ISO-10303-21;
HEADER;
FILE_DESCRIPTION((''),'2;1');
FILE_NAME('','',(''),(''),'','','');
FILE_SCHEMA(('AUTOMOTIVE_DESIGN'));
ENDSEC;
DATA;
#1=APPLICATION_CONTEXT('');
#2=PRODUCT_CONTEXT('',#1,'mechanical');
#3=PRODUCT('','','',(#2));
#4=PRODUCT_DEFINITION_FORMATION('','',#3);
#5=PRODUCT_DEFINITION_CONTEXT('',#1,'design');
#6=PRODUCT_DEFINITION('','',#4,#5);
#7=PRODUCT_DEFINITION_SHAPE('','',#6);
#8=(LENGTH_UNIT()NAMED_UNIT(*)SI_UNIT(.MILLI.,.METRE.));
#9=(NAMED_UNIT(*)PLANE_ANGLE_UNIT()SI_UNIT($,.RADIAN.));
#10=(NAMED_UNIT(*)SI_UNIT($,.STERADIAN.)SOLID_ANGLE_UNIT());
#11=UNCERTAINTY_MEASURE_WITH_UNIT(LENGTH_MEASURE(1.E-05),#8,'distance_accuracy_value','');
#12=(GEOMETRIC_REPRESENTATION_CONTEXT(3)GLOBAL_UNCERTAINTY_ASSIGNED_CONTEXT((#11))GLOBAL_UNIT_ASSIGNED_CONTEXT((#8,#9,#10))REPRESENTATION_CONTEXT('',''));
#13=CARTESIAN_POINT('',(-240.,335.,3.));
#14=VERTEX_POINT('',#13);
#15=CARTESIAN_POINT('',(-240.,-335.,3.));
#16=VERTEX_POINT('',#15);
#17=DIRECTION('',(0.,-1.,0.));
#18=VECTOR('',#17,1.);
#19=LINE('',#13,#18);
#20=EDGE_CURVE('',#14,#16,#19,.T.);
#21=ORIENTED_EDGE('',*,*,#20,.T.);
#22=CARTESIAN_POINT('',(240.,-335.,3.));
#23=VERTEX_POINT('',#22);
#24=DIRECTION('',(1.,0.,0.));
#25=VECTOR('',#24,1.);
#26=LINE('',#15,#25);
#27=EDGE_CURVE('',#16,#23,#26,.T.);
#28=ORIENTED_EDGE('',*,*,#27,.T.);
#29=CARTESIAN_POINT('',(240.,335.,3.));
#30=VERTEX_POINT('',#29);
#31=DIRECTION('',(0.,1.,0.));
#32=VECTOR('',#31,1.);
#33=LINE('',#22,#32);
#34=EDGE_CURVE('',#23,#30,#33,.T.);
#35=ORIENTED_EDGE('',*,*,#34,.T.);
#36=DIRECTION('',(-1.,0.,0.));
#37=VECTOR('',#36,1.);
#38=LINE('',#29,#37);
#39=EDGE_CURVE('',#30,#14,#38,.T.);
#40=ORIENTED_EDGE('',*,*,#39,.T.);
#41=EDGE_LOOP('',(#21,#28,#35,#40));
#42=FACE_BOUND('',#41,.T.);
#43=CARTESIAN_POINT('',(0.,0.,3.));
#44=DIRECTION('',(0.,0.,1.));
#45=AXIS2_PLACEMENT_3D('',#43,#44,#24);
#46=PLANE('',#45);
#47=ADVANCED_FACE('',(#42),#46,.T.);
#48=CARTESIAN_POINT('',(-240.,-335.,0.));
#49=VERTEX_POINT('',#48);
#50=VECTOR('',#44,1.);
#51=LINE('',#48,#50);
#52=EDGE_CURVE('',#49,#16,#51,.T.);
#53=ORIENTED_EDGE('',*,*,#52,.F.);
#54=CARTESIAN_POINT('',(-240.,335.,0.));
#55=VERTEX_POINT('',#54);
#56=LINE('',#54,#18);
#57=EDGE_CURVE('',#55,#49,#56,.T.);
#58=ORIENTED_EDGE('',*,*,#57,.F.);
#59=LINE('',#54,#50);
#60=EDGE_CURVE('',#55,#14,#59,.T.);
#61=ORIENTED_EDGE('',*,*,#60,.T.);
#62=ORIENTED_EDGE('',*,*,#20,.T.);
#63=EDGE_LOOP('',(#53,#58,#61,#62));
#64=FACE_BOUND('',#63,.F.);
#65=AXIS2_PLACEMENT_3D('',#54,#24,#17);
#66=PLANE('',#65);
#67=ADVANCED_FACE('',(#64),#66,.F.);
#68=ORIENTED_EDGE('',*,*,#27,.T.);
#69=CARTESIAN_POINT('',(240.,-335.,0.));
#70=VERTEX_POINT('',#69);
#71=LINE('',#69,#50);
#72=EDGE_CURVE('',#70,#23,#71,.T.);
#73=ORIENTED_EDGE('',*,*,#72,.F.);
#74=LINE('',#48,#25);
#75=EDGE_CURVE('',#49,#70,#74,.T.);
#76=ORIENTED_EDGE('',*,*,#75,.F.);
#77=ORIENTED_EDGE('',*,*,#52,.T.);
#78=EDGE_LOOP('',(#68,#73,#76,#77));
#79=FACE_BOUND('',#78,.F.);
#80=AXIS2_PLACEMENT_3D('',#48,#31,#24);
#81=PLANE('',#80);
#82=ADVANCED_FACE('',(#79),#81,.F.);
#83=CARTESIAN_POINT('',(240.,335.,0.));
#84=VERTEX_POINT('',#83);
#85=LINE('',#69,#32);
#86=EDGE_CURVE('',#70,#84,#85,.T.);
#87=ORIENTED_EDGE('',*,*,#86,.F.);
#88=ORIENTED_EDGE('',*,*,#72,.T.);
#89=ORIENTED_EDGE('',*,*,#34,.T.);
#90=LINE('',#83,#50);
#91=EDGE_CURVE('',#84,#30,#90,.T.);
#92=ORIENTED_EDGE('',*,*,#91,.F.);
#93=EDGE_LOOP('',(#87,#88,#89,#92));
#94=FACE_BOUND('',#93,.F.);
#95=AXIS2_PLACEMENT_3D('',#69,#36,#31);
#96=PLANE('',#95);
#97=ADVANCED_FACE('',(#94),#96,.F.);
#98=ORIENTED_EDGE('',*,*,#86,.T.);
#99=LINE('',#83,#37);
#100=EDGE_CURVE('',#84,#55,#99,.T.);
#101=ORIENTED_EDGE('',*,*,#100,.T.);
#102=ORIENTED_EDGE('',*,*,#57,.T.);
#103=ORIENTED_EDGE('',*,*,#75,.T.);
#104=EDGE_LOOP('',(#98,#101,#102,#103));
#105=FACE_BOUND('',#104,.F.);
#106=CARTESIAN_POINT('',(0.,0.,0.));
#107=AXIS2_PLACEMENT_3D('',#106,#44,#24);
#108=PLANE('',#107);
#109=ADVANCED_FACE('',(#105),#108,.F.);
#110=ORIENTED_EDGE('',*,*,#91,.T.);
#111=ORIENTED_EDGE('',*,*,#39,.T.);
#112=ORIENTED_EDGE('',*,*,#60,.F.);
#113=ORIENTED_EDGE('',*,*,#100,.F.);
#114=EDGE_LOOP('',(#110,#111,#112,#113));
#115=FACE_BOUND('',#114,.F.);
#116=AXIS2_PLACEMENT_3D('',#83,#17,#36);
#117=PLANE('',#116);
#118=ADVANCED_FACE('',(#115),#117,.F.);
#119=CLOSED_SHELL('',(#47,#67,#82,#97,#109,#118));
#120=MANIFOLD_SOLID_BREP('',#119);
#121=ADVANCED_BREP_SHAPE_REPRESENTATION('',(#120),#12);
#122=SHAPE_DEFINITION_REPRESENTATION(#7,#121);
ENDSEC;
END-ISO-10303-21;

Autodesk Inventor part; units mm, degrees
ref_plane "YZ Plane" through (0, 0, 0) normal (1, 0, 0) x (0, 1, 0)
ref_plane "XZ Plane" through (0, 0, 0) normal (0, 1, 0) x (-1, 0, 0)
ref_plane "XY Plane" through (0, 0, 0) normal (0, 0, 1) x (1, 0, 0)
sketch "Sketch1" plane through (0, 0, 0) normal (0, 0, 1) x (1, 0, 0)
  line L0 (-240, -335) -> (240, -335)
  line L1 (240, -335) -> (240, 335)
  line L2 (240, 335) -> (-240, 335)
  line L3 (-240, 335) -> (-240, -335)
  line L4 (-240, -335) -> (240, 335) construction
  line L5 (240, -335) -> (-240, 335) construction
  point P0 (0, 0)
  dimension "d0" = 480
  dimension "d1" = 670
extrude "Plate1" add sketch "Sketch1" along normal blind 3
sketch "Sketch2" plane through (0, 0, 0) normal (0, 0, -1) x (-1, 0, 0)
  line L0 (-220, 315) -> (-20, 315) construction
  line L1 (-20, 315) -> (-20, 295) construction
  line L2 (-20, 295) -> (-220, 295) construction
  line L3 (-220, 295) -> (-220, 315) construction
  line L4 (-240, 335) -> (240, 335) projected
  line L5 (-240, -335) -> (-240, 335) projected
  point P0 (0, 0)
  point P1 (-48, 100)
  point P2 (-50, 98)
  dimension "d6" = 200
  dimension "d9" = 20
  dimension "d10" = 20
  dimension "d11" = 20
mark "Mark1"
equation "\"d2\" = Thickness"
equation "\"BendReliefWidth\" = Thickness"
equation "\"BendReliefDepth\" = 0.5 * Thickness"
equation "\"CornerReliefSize\" = 4 * Thickness"
equation "\"MinimumRemnant\" = 2 * Thickness"
equation "\"TransitionRadius\" = BendRadius"
equation "\"JacobiRadiusSize\" = BendRadius"
equation "\"GapSize\" = Thickness"
equation "\"Thickness\" = 3"
equation "\"BendRadius\" = 2.75"
properties part number "TRM 022 back damper" material "AISI 304"
